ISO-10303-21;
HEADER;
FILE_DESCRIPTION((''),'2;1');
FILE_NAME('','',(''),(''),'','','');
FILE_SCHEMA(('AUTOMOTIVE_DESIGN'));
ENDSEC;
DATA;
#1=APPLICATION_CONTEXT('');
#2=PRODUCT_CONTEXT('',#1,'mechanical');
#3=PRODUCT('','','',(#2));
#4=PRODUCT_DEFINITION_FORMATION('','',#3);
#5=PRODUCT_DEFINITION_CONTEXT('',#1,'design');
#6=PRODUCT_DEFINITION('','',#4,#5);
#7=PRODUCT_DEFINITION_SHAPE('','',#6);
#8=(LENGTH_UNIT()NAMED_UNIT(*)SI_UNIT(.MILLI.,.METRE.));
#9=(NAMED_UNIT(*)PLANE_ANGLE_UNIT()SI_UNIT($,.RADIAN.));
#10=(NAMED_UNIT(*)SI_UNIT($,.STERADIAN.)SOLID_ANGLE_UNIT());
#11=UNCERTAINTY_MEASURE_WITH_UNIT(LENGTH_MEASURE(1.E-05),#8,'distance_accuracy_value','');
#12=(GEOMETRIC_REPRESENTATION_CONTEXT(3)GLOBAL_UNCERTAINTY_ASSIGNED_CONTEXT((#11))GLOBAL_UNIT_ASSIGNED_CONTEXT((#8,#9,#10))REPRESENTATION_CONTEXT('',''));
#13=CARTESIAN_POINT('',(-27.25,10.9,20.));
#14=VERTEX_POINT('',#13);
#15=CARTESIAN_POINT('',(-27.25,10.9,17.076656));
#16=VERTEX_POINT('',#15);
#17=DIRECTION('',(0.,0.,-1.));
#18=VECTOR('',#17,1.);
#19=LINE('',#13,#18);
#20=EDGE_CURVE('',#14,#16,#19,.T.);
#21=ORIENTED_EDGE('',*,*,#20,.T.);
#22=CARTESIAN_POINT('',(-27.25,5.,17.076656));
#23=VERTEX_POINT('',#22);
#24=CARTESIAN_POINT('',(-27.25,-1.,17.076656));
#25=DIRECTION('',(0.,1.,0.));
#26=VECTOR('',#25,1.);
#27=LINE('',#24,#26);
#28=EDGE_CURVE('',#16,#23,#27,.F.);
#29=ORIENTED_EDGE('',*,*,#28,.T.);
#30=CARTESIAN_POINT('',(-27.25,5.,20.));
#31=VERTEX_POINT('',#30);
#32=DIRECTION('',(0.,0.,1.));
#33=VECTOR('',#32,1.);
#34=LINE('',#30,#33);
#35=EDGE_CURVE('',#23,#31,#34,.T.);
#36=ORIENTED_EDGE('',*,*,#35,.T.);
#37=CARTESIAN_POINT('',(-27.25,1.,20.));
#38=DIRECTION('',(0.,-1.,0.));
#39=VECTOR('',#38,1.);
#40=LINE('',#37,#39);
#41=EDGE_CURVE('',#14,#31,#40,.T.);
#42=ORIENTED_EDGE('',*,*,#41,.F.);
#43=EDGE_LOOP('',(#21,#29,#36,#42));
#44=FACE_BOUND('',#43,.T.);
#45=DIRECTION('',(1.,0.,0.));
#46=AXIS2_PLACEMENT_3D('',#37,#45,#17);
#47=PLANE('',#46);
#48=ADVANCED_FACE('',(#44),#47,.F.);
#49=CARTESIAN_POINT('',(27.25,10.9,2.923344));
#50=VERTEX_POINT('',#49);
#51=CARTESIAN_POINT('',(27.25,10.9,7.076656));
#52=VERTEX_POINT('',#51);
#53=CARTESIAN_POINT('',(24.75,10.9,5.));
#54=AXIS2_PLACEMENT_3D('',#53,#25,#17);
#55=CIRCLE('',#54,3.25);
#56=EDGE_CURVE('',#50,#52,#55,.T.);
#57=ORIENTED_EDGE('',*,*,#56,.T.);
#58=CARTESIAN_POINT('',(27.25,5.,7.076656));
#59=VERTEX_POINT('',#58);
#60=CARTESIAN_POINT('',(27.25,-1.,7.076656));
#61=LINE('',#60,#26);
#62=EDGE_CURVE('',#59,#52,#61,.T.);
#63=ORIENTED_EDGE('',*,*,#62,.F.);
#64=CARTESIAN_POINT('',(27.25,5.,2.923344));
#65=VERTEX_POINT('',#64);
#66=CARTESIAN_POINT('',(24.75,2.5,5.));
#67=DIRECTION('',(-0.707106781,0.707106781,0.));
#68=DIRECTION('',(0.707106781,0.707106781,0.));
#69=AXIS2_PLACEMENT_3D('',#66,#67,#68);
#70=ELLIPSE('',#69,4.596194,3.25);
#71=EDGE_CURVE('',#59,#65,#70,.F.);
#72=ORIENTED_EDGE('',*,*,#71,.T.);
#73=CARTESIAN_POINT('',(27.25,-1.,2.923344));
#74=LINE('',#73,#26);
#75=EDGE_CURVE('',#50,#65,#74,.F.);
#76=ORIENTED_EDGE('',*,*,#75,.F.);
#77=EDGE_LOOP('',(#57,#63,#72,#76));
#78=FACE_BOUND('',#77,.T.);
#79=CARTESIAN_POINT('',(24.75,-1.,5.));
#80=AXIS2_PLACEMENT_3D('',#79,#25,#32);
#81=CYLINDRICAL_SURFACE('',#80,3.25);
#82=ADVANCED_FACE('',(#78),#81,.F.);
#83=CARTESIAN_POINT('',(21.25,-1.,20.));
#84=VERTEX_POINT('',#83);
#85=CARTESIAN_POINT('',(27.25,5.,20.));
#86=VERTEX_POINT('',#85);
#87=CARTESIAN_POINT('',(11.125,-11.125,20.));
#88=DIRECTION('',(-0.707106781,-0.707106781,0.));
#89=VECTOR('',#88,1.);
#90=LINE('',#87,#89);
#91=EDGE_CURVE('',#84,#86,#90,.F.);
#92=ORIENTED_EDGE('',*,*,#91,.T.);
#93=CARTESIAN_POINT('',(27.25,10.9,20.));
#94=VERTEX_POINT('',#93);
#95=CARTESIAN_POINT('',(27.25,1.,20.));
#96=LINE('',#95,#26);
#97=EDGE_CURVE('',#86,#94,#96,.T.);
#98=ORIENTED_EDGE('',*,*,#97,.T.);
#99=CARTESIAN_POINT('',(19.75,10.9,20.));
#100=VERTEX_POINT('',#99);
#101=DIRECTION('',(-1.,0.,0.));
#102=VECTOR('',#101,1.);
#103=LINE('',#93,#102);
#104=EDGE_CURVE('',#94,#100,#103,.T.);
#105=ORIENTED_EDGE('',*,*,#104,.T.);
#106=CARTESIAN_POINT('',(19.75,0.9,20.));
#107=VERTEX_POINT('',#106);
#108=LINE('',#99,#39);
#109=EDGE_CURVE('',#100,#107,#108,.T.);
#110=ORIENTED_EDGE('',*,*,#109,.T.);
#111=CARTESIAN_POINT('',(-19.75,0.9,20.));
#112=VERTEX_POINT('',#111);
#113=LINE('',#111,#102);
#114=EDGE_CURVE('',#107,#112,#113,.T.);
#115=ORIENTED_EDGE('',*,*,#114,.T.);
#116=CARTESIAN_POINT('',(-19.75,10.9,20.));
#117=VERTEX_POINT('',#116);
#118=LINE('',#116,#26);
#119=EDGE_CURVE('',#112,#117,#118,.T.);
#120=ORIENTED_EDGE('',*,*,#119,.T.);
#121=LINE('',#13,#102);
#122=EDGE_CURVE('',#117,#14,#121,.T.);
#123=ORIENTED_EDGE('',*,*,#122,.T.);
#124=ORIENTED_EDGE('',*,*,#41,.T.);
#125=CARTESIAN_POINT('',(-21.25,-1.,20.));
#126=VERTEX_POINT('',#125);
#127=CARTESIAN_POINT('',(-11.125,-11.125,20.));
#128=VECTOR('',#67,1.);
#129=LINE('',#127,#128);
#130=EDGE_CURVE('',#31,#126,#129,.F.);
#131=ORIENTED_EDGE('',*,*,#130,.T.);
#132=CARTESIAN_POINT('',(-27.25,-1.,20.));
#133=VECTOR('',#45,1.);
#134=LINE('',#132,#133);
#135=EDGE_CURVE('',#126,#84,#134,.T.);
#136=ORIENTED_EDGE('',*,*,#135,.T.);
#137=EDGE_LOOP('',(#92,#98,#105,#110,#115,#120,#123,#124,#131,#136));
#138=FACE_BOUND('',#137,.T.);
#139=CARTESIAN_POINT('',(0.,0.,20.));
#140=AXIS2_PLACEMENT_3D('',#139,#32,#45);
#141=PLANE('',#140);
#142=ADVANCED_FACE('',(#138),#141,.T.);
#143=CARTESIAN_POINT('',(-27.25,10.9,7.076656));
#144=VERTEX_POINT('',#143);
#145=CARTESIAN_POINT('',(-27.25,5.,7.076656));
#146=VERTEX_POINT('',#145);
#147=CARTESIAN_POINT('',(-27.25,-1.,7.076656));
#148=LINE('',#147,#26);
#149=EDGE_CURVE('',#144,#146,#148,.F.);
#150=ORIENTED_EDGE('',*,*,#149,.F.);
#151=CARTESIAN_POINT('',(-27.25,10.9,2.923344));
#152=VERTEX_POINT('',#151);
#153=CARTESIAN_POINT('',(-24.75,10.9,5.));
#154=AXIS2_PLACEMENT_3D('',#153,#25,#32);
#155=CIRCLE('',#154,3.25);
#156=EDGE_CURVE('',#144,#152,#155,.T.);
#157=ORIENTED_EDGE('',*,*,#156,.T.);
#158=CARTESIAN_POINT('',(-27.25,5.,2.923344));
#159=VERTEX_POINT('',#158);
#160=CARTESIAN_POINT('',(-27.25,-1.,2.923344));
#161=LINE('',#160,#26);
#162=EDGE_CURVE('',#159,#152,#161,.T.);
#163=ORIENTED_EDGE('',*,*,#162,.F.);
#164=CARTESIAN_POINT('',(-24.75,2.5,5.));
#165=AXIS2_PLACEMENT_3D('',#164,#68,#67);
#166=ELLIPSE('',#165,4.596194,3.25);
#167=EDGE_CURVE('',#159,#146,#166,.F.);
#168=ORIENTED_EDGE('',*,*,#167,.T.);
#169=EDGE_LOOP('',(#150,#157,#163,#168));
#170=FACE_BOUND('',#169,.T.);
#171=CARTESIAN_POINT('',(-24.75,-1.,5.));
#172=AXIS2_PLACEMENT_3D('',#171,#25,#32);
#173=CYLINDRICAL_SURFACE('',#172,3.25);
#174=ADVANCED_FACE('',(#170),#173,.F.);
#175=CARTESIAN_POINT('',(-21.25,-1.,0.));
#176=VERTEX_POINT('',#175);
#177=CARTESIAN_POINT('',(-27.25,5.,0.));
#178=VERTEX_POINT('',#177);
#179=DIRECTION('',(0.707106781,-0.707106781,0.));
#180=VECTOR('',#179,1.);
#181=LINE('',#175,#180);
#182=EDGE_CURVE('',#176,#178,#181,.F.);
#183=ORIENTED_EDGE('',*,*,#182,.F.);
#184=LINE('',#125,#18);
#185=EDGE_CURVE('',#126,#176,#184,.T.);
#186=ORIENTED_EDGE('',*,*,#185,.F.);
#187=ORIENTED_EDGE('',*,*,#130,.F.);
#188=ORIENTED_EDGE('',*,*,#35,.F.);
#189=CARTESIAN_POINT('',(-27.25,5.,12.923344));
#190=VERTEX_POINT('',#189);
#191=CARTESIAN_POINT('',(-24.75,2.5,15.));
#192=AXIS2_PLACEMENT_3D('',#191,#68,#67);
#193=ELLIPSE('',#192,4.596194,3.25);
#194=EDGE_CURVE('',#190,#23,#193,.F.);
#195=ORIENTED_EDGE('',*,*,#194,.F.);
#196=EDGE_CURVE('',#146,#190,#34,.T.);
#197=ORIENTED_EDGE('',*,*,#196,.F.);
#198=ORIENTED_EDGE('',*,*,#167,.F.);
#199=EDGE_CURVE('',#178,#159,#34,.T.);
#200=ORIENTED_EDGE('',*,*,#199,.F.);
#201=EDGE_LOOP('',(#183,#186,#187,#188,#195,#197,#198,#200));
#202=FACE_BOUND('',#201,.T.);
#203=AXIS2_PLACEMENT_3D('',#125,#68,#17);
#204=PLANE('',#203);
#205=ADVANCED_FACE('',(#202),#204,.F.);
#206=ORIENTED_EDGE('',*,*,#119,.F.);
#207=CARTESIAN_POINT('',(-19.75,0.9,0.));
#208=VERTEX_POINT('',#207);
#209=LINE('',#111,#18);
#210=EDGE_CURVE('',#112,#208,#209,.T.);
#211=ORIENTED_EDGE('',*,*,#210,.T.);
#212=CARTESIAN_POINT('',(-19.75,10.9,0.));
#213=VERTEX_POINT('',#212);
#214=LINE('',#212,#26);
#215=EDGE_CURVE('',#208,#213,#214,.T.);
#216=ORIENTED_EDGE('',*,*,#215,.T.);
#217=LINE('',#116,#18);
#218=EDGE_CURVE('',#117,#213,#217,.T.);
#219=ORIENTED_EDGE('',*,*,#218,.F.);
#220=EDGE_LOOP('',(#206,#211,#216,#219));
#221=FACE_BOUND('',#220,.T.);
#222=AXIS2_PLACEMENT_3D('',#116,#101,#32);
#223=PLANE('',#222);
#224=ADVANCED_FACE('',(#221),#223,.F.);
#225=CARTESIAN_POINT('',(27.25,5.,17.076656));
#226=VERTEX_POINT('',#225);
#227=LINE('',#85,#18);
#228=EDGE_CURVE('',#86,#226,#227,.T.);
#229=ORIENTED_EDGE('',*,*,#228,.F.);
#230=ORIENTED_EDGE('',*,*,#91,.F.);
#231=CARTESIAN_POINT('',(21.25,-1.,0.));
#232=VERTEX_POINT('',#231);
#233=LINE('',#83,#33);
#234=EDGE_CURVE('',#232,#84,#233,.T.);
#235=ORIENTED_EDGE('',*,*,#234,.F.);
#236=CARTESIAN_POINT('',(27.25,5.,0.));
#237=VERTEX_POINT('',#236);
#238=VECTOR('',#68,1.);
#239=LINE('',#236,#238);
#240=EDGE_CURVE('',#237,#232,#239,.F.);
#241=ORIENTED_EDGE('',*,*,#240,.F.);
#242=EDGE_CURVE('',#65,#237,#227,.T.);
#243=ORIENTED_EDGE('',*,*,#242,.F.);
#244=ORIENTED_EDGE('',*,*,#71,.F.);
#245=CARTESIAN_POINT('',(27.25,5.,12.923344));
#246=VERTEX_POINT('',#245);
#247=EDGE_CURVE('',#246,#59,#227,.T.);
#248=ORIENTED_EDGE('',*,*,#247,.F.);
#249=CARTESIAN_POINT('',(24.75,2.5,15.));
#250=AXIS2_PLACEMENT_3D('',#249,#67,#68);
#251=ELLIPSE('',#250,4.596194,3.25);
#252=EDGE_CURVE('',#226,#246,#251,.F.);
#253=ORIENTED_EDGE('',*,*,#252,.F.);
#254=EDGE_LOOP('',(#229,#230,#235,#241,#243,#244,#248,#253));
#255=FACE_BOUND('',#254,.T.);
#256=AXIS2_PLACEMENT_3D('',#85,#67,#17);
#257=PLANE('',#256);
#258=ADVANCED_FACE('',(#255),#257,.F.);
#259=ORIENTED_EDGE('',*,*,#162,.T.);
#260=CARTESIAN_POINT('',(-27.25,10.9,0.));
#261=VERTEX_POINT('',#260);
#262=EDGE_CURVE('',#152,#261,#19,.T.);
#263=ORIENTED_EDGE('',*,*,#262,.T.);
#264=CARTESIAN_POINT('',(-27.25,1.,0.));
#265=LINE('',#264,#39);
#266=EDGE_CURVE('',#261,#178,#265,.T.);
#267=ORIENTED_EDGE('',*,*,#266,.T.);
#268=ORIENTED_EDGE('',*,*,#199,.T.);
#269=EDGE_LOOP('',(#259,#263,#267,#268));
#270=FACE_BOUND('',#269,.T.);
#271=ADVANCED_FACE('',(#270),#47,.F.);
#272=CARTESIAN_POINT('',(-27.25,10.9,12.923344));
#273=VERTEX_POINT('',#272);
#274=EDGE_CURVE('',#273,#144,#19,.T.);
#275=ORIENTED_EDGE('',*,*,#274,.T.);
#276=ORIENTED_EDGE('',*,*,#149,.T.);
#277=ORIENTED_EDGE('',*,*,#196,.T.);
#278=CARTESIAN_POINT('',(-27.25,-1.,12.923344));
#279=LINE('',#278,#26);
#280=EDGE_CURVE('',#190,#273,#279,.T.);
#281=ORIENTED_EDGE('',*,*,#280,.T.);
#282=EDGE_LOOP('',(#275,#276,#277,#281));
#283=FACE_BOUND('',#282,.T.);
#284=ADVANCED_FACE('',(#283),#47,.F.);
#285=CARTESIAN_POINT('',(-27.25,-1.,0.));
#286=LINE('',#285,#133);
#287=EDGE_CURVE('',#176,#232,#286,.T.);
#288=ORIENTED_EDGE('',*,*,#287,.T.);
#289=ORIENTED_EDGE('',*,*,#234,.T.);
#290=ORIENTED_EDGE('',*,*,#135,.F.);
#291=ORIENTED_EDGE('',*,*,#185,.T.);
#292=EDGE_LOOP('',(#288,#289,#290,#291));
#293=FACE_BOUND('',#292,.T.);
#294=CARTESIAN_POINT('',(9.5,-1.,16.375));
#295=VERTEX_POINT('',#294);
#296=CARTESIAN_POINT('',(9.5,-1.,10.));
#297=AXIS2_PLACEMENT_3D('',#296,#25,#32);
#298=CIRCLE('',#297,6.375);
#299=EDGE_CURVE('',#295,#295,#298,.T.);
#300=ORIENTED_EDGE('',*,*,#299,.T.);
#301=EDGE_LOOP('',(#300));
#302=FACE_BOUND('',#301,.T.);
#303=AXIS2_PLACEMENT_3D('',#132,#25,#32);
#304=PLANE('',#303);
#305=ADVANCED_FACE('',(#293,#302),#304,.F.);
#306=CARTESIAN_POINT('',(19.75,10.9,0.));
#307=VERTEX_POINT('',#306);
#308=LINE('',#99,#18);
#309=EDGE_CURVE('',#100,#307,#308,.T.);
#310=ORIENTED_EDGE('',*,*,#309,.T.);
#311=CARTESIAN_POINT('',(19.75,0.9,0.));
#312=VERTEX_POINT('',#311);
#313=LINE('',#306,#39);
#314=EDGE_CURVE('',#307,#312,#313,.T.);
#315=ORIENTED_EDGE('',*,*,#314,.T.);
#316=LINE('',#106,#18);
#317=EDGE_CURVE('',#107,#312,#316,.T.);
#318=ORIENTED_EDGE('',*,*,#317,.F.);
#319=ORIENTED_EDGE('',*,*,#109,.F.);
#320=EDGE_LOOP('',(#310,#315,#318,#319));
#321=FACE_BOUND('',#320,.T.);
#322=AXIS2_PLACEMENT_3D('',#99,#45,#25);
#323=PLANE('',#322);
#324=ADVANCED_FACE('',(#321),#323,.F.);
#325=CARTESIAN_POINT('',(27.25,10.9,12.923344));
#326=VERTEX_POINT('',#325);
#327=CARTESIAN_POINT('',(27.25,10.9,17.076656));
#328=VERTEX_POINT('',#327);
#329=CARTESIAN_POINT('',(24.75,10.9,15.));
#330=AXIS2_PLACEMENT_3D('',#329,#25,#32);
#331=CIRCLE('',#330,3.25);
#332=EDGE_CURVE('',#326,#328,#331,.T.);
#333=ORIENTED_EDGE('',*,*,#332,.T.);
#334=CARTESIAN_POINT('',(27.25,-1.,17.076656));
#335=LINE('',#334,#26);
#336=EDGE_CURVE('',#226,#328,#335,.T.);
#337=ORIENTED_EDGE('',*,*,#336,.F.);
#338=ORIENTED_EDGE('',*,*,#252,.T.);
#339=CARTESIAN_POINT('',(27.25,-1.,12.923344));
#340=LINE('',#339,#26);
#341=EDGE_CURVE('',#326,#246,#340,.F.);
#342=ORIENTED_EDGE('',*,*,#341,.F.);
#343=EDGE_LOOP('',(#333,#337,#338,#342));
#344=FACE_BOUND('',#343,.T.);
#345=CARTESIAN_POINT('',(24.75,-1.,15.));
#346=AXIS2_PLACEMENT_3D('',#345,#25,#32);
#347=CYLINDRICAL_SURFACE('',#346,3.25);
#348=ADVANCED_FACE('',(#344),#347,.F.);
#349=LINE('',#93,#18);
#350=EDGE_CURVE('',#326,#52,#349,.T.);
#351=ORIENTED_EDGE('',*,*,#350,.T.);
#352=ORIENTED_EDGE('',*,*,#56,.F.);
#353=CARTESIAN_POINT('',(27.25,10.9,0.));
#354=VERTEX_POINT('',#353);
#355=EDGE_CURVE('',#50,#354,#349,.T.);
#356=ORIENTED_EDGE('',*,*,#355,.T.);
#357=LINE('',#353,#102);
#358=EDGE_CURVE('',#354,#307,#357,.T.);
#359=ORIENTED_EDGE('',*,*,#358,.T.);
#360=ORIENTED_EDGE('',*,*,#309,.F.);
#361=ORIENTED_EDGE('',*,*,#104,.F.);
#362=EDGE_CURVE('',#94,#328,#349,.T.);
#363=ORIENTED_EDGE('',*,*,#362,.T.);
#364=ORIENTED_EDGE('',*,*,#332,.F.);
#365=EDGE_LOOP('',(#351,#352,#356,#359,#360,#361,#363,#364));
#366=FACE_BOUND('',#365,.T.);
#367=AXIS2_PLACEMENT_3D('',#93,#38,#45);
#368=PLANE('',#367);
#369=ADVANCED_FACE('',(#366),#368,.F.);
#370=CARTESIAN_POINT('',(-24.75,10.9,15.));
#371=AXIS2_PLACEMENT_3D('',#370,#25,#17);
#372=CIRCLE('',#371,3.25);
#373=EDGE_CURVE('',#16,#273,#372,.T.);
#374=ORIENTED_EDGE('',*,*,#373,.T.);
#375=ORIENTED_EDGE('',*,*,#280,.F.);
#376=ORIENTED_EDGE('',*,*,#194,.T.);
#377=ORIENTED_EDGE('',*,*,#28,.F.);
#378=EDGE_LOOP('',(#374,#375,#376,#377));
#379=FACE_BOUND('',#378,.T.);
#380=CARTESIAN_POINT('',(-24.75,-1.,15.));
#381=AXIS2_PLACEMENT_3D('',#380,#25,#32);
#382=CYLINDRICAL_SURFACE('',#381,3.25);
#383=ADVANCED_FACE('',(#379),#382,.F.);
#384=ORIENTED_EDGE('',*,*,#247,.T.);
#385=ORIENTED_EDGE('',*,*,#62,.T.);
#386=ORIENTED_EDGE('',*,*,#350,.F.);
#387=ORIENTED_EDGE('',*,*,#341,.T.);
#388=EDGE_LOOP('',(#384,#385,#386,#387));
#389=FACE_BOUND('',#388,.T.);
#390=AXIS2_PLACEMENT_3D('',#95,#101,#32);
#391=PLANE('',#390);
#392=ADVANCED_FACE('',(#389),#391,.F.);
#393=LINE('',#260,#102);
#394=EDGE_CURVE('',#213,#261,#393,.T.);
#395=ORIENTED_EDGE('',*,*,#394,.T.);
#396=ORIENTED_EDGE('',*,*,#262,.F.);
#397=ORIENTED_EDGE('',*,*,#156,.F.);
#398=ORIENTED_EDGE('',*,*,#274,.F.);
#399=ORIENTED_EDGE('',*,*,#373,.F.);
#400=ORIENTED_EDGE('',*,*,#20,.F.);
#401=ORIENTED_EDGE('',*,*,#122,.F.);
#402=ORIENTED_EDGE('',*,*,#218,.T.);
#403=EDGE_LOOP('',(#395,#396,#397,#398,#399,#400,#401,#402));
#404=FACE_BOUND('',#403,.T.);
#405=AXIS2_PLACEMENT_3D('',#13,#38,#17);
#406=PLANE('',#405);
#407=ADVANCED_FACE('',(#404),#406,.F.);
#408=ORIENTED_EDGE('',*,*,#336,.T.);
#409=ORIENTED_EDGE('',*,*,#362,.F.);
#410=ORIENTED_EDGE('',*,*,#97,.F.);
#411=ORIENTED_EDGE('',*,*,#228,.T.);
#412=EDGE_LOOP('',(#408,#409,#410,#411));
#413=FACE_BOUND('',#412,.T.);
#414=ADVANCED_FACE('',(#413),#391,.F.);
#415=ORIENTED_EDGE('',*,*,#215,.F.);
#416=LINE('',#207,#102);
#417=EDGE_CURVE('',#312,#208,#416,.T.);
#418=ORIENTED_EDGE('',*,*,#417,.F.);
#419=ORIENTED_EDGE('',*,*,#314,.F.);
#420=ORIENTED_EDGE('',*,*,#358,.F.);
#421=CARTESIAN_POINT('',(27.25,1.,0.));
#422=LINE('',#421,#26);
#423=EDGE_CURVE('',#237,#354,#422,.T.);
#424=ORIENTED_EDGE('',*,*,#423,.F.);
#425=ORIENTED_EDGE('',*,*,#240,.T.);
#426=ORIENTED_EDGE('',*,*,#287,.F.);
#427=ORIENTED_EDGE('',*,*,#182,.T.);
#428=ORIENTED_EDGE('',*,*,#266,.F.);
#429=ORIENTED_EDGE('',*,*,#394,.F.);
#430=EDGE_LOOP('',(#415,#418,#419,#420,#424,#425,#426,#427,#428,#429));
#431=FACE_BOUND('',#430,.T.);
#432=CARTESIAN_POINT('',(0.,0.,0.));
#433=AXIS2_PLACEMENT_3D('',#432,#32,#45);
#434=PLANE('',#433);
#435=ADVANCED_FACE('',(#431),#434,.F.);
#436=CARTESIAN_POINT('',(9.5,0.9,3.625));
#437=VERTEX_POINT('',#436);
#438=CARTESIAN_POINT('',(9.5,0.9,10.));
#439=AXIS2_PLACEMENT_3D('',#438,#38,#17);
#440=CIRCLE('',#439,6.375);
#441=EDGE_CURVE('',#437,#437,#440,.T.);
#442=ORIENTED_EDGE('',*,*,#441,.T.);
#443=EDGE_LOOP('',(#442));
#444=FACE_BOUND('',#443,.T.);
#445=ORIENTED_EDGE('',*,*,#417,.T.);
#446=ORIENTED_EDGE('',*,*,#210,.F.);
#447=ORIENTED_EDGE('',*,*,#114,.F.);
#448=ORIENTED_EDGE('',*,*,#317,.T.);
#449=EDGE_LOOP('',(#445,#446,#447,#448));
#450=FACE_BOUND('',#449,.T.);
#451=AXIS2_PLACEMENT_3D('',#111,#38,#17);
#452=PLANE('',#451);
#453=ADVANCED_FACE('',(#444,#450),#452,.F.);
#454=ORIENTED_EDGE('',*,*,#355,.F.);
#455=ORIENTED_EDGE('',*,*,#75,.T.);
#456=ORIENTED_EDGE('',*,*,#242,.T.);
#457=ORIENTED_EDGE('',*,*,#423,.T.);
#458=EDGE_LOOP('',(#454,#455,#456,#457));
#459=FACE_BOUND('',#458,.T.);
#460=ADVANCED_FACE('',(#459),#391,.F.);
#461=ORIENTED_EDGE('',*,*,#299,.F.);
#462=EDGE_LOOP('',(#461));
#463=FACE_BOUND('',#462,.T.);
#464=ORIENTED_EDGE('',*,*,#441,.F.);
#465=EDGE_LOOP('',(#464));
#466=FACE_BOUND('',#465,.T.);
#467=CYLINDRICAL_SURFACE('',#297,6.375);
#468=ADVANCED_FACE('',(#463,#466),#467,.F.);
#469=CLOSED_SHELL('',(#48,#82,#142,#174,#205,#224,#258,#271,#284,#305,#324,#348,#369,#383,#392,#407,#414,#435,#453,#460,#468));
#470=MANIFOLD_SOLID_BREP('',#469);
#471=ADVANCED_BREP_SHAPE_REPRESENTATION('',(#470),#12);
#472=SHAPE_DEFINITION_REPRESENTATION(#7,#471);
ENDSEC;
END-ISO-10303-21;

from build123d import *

# Parameters (mm, degrees)
BOSS_EXTRUDE1_DEPTH     = 20
CUT_EXTRUDE2_DEPTH      = 36.51580634
CUT_EXTRUDE2_DEPTH_BACK = 36.51580634
SKETCH2_R               = 3.25
CHAMFER1_SIZE           = 6
CUT_EXTRUDE3_DEPTH      = 36.51580634
CUT_EXTRUDE3_DEPTH_BACK = 36.51580634
SKETCH3_R               = 6.375


with BuildPart() as part:
    # Sketch1 → Boss-Extrude1 (new body)
    with BuildSketch(Plane.XY):
        Polygon((-27.25, 1), (-27.25, 10.9), (-19.75, 10.9), (-19.75, 0.9), (19.75, 0.9), (19.75, 10.9), (27.25, 10.9), (27.25, 1), (27.25, -1), (-27.25, -1), align=None)
    extrude(amount=BOSS_EXTRUDE1_DEPTH)

    # Sketch2 → Cut-Extrude2 (cut, two sides: drawn at the far end of the back side and taken through both)
    with BuildSketch(Plane(origin=(0, 0, 0), x_dir=(1, 0, 0), z_dir=(0, 1, 0)).offset(-CUT_EXTRUDE2_DEPTH_BACK)):
        with Locations((-24.75, -5)):
            Circle(SKETCH2_R)
        with Locations((24.75, -5)):
            Circle(SKETCH2_R)
        with Locations((24.75, -15)):
            Circle(SKETCH2_R)
        with Locations((-24.75, -15)):
            Circle(SKETCH2_R)
    extrude(amount=CUT_EXTRUDE2_DEPTH + CUT_EXTRUDE2_DEPTH_BACK, mode=Mode.SUBTRACT)

    # Chamfer1
    # the kernel refuses this chamfer: 6 mm, written as the material it takes off along each edge
    with BuildSketch(Plane(origin=(-27.25, -1, -15.430097928), x_dir=(-0.027495876610586206, 0.9996219169112968, 0), z_dir=(0, 0, 1))) as chamfer1_piece_1:
        Polygon((CHAMFER1_SIZE * 0.999621916911, -CHAMFER1_SIZE * 0.0274958766106), (-CHAMFER1_SIZE * 0.0274958766106, -CHAMFER1_SIZE * 0.999621916911), (0, 0), align=None)
    extrude(amount=33.78353989, mode=Mode.SUBTRACT)
    with BuildSketch(Plane(origin=(-27.25, -1, -8.353441962), x_dir=(-0.027495876610586206, 0.9996219169112968, 0), z_dir=(0, 0, 1))) as chamfer1_piece_2:
        Polygon((CHAMFER1_SIZE * 0.999621916911, -CHAMFER1_SIZE * 0.0274958766106), (-CHAMFER1_SIZE * 0.0274958766106, -CHAMFER1_SIZE * 0.999621916911), (0, 0), align=None)
    extrude(amount=36.706883924, mode=Mode.SUBTRACT)
    with BuildSketch(Plane(origin=(27.25, -1, -15.430097928), x_dir=(0.027495876610586202, 0.9996219169112968, 0), z_dir=(0, 0, 1)), Plane(origin=(27.25, -1, 1.646558038), x_dir=(0.027495876610586202, 0.9996219169112968, 0), z_dir=(0, 0, 1))) as chamfer1_piece_3:
        Polygon((CHAMFER1_SIZE * 0.999621916911, CHAMFER1_SIZE * 0.0274958766106), (-CHAMFER1_SIZE * 0.0274958766106, CHAMFER1_SIZE * 0.999621916911), (0, 0), align=None)
    extrude(amount=33.78353989, mode=Mode.SUBTRACT)
    with BuildSketch(Plane(origin=(27.25, -1, -8.353441962), x_dir=(0.027495876610586202, 0.9996219169112968, 0), z_dir=(0, 0, 1))) as chamfer1_piece_4:
        Polygon((CHAMFER1_SIZE * 0.999621916911, CHAMFER1_SIZE * 0.0274958766106), (-CHAMFER1_SIZE * 0.0274958766106, CHAMFER1_SIZE * 0.999621916911), (0, 0), align=None)
    extrude(amount=36.706883924, mode=Mode.SUBTRACT)

    # Sketch3 → Cut-Extrude3 (cut, two sides: drawn at the far end of the back side and taken through both)
    with BuildSketch(Plane(origin=(0, 0, 0), x_dir=(1, 0, 0), z_dir=(0, 1, 0)).offset(-CUT_EXTRUDE3_DEPTH_BACK)):
        with Locations(Location((9.5, -10, 0), (0, 0, 270))):
            Circle(SKETCH3_R)
    extrude(amount=CUT_EXTRUDE3_DEPTH + CUT_EXTRUDE3_DEPTH_BACK, mode=Mode.SUBTRACT)


solid = part.part
